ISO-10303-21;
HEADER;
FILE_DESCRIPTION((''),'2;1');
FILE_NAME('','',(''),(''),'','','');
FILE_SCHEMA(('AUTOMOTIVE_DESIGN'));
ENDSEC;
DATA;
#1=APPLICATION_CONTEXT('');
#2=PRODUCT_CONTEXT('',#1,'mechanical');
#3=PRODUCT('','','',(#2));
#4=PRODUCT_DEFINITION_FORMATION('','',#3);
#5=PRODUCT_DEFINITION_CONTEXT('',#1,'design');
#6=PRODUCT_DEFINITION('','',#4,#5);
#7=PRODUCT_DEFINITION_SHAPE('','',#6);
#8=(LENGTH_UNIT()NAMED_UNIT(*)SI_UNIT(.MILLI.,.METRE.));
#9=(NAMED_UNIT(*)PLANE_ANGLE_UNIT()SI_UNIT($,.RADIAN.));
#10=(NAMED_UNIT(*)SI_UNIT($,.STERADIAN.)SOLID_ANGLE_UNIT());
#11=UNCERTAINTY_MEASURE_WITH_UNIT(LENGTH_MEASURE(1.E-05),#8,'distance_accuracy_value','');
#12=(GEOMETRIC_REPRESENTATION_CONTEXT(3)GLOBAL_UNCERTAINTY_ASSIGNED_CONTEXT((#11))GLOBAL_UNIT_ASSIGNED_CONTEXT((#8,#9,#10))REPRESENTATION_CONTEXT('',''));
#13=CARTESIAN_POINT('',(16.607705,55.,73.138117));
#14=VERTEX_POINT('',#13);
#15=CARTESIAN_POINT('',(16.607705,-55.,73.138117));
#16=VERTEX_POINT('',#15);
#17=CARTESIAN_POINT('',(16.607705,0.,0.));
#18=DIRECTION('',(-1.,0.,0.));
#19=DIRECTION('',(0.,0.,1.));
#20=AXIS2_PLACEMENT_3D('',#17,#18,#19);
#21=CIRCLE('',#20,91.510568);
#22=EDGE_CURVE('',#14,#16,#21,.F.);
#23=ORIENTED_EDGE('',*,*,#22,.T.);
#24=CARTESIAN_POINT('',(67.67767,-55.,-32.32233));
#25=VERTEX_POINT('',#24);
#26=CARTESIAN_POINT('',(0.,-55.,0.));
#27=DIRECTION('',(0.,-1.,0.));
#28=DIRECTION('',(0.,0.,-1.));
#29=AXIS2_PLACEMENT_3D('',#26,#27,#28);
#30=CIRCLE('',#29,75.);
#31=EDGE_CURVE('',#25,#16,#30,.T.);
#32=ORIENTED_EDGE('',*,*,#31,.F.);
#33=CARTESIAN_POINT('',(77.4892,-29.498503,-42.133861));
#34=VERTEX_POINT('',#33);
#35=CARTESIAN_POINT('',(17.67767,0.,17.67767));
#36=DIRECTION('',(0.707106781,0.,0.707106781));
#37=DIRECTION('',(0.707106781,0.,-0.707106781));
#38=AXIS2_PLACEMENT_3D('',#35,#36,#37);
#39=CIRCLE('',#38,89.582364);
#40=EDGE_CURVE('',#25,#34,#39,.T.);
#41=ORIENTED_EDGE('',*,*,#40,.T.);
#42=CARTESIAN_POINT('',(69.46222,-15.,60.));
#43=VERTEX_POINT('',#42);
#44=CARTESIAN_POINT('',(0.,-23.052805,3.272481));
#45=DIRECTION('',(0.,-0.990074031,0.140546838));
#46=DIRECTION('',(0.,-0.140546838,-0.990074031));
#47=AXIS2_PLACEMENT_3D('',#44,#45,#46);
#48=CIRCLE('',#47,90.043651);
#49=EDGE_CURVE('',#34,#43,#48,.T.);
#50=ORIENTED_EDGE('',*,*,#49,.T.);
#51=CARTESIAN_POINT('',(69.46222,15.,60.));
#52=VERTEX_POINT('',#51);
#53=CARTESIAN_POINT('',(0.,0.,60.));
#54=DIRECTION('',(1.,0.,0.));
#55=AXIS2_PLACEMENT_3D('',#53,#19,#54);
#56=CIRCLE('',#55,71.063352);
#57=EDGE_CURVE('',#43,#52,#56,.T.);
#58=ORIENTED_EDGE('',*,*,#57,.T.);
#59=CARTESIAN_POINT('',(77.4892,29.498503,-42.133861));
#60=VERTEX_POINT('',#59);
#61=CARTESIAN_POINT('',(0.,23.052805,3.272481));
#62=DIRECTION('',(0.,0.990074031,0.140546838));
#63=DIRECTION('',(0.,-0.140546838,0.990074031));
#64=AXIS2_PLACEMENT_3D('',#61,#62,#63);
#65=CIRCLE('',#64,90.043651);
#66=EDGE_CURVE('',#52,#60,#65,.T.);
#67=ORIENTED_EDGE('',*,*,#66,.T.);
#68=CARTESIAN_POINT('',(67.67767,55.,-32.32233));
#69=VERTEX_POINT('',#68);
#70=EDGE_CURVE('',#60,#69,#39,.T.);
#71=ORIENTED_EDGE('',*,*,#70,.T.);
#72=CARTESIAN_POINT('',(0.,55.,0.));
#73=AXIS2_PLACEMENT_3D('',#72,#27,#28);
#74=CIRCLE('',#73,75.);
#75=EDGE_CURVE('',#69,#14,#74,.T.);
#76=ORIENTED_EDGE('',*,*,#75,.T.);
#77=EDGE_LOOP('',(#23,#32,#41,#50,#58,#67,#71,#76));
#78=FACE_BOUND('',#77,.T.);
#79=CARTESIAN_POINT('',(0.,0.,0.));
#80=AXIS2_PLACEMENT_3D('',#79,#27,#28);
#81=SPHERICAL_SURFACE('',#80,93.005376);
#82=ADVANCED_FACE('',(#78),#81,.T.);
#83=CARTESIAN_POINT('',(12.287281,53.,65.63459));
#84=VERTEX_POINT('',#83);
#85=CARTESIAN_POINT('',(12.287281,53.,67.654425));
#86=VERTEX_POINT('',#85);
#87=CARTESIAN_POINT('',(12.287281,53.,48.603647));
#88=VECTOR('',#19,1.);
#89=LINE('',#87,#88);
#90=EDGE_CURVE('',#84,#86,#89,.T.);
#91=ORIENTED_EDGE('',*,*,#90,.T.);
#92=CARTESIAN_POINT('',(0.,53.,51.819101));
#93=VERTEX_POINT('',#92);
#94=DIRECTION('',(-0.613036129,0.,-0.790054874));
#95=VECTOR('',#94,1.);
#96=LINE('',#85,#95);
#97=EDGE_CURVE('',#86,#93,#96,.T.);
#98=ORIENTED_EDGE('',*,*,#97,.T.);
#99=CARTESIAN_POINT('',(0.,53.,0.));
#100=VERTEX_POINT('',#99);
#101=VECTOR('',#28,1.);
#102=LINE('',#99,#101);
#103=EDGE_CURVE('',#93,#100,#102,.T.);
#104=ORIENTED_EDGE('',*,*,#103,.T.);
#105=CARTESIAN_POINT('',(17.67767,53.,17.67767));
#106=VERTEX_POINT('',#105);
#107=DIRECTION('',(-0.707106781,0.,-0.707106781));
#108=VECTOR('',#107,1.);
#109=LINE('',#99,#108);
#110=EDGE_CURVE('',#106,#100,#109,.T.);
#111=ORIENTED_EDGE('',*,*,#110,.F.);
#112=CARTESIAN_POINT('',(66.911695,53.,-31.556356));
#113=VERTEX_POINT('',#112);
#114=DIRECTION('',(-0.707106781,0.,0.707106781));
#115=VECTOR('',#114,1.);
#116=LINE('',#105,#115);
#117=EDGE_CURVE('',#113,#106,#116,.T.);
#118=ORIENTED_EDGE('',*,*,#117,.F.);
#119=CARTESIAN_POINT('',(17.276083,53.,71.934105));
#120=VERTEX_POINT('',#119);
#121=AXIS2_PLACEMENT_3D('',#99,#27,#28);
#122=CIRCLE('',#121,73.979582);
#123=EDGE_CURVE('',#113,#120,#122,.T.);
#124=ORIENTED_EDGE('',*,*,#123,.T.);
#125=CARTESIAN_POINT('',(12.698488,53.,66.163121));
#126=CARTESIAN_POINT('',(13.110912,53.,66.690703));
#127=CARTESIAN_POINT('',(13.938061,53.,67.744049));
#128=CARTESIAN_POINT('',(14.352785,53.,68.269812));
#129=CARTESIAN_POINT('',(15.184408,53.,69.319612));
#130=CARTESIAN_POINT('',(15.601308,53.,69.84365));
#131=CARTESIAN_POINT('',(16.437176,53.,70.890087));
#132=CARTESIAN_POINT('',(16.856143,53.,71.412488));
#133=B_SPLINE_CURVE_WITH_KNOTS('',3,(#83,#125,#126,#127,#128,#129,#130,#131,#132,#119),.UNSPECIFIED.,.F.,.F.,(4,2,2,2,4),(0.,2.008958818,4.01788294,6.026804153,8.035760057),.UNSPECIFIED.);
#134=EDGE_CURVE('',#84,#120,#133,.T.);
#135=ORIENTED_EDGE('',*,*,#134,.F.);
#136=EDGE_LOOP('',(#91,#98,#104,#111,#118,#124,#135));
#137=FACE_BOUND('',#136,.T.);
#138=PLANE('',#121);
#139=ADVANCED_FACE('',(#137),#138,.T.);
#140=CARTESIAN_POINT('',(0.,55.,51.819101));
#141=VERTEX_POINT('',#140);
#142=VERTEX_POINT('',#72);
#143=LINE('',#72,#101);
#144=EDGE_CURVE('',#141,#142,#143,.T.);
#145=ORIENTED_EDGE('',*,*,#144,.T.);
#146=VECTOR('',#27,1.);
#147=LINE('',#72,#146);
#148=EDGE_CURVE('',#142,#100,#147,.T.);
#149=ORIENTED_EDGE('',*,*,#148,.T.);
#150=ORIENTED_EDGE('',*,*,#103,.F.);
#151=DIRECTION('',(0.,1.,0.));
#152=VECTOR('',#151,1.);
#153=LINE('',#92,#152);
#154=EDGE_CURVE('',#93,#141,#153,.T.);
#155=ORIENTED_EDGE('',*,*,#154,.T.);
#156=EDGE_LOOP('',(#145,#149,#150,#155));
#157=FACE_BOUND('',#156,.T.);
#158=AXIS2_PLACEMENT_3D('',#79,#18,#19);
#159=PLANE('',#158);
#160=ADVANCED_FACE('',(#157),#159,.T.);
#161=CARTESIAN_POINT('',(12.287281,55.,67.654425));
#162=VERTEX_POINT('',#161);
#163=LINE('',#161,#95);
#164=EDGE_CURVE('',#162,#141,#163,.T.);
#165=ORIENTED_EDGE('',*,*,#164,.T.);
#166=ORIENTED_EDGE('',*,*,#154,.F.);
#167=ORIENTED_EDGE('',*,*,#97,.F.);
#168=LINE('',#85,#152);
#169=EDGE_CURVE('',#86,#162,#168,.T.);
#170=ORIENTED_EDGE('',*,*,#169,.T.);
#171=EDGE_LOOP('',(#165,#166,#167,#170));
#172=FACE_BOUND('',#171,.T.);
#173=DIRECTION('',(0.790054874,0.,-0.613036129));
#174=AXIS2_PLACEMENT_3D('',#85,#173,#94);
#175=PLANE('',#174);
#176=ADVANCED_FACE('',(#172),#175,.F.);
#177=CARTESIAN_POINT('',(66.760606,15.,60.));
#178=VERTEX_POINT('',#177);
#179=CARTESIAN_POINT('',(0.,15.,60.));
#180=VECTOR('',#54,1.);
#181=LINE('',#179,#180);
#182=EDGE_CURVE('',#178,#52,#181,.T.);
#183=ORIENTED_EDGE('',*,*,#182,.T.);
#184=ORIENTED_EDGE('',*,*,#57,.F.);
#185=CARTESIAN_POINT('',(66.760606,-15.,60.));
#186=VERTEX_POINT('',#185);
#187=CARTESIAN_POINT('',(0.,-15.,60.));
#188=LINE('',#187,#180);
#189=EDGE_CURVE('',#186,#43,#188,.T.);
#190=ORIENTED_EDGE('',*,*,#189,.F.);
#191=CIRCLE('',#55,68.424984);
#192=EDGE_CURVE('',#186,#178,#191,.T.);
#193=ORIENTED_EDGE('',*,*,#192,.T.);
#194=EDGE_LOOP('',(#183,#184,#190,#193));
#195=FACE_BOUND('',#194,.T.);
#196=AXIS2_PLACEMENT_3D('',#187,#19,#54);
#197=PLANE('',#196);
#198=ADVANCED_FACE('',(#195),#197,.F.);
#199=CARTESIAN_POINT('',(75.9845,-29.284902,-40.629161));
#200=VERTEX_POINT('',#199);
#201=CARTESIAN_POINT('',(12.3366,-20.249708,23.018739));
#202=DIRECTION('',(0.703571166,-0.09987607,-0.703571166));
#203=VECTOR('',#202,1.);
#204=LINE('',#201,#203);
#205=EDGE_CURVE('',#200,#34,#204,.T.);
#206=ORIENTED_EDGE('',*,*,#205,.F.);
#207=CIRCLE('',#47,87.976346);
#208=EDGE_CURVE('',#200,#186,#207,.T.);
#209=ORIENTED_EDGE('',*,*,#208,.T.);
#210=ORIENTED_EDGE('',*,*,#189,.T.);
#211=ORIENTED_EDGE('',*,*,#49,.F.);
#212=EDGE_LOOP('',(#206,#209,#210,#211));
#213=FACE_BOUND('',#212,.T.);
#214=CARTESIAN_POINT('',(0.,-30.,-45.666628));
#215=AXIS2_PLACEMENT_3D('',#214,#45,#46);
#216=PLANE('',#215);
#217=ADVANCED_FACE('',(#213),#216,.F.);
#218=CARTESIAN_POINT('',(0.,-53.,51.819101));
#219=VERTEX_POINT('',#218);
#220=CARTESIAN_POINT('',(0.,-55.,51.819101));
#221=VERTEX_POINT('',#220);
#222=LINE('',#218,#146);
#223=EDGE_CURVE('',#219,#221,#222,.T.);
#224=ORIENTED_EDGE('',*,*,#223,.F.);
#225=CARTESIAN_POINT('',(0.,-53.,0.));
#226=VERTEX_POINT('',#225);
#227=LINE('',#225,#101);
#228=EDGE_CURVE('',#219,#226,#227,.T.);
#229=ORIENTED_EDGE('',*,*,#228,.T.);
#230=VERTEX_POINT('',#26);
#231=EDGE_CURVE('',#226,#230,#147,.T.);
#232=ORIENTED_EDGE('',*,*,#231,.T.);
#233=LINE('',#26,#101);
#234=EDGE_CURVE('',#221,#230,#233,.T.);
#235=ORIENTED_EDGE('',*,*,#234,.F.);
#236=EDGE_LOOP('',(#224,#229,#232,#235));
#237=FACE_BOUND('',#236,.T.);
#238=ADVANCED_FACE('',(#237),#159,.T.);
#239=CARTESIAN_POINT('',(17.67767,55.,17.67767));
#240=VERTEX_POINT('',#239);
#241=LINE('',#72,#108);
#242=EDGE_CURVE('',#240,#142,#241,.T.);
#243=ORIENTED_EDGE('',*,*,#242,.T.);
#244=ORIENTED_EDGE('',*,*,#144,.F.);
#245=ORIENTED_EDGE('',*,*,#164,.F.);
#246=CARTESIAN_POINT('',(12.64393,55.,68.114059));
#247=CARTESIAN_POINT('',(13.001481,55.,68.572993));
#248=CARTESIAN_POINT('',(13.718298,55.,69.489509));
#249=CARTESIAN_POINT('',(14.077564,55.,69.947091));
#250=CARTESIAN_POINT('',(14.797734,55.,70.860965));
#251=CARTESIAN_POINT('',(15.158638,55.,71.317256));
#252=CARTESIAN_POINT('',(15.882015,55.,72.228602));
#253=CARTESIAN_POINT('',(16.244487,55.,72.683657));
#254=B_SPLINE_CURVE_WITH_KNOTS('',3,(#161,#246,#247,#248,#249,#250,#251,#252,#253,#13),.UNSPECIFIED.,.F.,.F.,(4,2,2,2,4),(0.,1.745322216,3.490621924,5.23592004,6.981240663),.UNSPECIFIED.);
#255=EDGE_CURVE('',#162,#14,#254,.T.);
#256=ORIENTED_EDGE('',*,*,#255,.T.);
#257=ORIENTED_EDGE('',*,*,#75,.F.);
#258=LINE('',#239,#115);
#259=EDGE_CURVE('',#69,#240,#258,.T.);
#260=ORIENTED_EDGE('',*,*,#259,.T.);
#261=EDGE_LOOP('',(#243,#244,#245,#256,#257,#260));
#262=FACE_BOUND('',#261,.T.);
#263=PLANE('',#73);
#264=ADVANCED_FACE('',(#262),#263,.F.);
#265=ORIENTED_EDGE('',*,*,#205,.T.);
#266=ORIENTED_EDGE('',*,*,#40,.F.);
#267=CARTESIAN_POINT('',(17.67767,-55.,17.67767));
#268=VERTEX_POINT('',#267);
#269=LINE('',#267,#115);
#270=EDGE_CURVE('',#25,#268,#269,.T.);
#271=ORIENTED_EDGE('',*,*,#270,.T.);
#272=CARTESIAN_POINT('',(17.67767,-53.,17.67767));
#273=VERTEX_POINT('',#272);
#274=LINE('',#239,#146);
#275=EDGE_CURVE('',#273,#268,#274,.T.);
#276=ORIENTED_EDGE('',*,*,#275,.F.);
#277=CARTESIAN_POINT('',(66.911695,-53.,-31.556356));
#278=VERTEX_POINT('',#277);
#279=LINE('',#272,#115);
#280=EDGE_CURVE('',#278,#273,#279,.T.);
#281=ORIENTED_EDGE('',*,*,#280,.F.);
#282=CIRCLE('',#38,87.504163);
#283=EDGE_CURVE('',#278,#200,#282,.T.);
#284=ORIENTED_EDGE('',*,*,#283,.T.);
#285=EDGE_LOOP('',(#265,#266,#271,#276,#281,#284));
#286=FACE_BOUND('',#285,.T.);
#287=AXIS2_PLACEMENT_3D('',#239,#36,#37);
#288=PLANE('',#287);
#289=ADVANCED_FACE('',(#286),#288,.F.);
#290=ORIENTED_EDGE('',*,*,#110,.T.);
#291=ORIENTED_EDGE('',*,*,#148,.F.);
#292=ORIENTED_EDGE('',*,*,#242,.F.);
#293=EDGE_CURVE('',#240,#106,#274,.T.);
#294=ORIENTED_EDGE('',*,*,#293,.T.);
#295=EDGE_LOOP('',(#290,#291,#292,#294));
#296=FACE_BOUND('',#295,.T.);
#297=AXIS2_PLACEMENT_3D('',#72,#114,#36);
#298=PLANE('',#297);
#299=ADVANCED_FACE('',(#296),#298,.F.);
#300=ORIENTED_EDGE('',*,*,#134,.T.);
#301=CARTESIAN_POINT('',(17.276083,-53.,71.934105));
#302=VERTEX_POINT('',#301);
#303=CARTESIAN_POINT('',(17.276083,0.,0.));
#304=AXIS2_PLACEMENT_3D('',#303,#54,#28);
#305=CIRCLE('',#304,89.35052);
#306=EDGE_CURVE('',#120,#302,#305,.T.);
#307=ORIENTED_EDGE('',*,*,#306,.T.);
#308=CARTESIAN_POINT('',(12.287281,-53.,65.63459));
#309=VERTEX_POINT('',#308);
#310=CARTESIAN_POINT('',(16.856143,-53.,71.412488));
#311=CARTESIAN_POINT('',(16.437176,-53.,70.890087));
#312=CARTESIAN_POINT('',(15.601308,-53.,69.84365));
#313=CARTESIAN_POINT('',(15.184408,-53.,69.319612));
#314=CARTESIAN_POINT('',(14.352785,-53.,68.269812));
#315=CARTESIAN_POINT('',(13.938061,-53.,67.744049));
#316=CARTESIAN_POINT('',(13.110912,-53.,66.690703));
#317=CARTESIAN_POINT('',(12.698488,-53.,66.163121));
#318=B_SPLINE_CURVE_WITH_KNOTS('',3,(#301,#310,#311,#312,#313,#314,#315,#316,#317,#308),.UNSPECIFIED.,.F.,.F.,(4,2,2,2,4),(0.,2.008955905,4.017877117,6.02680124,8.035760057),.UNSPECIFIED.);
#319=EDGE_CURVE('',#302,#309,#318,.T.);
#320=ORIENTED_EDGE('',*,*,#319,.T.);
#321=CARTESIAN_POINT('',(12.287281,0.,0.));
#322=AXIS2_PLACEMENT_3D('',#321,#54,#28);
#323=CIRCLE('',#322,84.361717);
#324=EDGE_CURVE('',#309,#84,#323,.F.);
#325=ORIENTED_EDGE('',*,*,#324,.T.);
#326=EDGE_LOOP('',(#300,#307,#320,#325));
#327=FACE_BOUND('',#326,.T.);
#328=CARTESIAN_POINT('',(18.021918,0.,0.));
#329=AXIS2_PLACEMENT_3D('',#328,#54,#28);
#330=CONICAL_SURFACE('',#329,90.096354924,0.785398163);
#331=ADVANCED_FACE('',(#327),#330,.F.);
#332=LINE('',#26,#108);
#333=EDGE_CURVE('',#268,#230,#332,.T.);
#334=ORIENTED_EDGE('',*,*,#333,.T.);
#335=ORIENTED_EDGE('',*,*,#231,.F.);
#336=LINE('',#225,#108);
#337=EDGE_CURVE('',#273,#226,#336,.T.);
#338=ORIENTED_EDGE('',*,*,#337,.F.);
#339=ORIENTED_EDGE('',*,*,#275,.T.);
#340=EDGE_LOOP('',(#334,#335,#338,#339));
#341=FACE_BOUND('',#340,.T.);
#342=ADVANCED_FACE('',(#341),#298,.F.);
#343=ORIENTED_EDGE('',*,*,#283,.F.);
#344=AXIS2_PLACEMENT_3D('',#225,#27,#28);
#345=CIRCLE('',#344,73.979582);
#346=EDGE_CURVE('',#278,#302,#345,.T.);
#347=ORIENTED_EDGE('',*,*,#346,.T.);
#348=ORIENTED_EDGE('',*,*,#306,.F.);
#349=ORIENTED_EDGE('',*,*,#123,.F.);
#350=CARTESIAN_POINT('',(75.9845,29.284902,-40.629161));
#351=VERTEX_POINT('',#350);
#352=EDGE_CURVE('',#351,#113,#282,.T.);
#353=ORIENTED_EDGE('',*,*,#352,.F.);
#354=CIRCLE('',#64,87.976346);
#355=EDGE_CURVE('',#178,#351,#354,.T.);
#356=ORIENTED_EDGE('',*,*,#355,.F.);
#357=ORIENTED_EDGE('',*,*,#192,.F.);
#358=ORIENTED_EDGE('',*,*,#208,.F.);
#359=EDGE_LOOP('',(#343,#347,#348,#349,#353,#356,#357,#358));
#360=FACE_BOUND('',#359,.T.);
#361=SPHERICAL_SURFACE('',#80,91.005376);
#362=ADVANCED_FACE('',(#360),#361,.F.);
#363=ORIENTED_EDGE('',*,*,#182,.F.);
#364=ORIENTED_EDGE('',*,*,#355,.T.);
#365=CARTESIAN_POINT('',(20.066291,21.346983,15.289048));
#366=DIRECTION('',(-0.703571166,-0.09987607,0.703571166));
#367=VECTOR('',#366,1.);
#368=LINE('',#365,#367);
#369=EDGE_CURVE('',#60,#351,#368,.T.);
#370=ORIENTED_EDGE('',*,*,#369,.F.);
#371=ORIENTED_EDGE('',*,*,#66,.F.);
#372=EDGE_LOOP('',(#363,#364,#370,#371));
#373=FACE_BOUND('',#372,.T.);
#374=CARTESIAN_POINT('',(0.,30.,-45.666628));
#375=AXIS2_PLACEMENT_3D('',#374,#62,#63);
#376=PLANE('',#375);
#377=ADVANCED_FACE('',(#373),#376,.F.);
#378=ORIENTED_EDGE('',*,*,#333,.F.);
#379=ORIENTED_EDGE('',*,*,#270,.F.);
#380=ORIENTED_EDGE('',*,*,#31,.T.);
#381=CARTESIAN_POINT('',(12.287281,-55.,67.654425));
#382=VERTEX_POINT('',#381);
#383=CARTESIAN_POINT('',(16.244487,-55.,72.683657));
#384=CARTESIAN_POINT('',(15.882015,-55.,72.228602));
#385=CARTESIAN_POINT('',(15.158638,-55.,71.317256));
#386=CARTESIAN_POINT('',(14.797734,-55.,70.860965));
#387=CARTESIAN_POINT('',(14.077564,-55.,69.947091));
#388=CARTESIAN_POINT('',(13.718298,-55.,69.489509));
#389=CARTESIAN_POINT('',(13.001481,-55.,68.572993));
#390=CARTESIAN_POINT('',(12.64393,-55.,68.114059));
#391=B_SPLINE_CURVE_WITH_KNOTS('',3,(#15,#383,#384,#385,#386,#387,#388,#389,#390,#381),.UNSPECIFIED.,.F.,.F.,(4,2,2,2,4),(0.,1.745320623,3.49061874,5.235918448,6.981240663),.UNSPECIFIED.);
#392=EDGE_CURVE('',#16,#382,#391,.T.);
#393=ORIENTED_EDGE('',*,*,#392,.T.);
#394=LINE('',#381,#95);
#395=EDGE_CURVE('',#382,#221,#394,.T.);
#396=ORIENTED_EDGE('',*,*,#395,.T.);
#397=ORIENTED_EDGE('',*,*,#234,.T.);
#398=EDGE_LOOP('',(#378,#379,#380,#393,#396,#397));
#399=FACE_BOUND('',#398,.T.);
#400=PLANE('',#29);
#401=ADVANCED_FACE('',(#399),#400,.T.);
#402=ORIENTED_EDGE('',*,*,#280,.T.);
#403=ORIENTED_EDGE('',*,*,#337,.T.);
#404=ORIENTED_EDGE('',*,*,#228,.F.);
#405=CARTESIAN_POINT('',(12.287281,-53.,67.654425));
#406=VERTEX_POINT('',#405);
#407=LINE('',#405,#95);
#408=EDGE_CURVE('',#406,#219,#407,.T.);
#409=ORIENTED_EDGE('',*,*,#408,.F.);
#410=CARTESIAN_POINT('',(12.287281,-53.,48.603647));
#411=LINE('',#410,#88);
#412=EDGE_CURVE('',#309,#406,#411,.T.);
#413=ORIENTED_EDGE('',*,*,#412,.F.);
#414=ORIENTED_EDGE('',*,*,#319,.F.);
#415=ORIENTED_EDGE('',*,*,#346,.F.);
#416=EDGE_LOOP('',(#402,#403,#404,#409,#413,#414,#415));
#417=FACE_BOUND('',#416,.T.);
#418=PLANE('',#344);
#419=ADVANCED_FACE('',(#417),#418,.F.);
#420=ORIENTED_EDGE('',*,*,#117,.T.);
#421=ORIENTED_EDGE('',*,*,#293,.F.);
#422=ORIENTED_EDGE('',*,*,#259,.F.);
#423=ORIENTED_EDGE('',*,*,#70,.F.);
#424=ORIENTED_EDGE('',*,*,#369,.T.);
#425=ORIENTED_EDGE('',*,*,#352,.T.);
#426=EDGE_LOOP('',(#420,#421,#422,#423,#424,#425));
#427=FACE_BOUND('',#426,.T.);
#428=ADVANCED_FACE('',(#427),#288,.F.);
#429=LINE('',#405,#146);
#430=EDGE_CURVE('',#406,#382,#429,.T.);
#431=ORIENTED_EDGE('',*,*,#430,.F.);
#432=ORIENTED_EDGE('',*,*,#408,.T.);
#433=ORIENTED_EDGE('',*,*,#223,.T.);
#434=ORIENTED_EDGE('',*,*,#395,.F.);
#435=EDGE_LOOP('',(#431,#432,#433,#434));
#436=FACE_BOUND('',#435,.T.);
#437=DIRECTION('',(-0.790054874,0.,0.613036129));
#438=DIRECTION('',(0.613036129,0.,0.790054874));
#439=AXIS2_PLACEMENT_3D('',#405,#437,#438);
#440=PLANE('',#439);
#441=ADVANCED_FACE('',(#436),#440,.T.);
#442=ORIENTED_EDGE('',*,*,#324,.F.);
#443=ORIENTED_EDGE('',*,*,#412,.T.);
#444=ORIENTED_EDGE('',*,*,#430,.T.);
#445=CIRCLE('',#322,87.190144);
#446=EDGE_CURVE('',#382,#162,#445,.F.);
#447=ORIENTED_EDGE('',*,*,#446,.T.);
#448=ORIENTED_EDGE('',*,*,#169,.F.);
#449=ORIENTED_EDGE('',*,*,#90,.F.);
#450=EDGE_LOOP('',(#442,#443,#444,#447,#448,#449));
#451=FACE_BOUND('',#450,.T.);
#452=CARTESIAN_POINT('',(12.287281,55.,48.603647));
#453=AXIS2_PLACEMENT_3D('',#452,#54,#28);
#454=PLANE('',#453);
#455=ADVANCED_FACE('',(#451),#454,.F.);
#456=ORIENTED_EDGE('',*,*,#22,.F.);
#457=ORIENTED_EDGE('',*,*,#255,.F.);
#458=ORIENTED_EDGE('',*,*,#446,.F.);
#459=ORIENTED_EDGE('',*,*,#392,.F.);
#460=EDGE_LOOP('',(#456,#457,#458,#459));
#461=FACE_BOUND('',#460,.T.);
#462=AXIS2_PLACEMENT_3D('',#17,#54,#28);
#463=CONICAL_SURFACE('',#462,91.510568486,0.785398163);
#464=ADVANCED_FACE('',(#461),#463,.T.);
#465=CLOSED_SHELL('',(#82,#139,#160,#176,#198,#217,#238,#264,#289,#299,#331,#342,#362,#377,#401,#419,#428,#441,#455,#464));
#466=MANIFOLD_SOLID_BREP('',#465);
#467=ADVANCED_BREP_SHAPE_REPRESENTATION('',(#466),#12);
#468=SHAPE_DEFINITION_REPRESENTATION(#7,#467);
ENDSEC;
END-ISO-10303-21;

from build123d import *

# Parameters (mm, degrees)
OBR_T1_ANGLE                = 180
WYTNIJ_WYCI_GNI_CIE1_DEPTH  = 172.464281995
WYTNIJ_WYCI_GNI_CIE2_DEPTH  = 147.710676959
SFAZOWANIE1_SIZE            = 5
SKORUPA1_T                  = -2
DODANIE_WYCI_GNI_CIE1_DEPTH = 2


with BuildPart() as part:
    # Szkic1 → Obrót1 (revolve)
    with BuildSketch(Plane(origin=(0, 0, 0), x_dir=(0, 0, -1), z_dir=(1, 0, 0))):
        with BuildLine():
            Line((0, -55), (0, 55))
            Line((0, 55), (-75, 55))
            ThreePointArc((-75, 55), (-93.005376189, 0), (-75, -55))
            Line((-75, -55), (0, -55))
        make_face()
    revolve(axis=Axis((0, -55, 0), (0, 1, 0)), revolution_arc=OBR_T1_ANGLE)

    # Szkic2 → Wytnij-wyciągnięcie1 (cut, through all)
    with BuildSketch(Plane.XZ.offset(55)):
        Polygon((0, 0), (0, 40), (12.287280664, 48.603646545), (12.287280664, 99.487677337), (-26.065901524, 99.487677337), (-26.065901524, -104.75854766), (87.353699516, -104.75854766), (87.353699516, -51.998360457), (17.67766953, 17.67766953), align=None)
    extrude(amount=-WYTNIJ_WYCI_GNI_CIE1_DEPTH, mode=Mode.SUBTRACT)

    # Szkic3 → Wytnij-wyciągnięcie2 (cut, through all)
    with BuildSketch(Plane(origin=(100, 0, 0), x_dir=(0, 0, -1), z_dir=(1, 0, 0))):
        Polygon((-60, -15), (-60, 15), (45.666627767, 30), (45.666627767, -30), align=None)
    extrude(amount=-WYTNIJ_WYCI_GNI_CIE2_DEPTH, mode=Mode.SUBTRACT)

    # Sfazowanie1
    # the kernel refuses this chamfer: 5, 4.450979534 mm, written as the material it takes off along each edge
    with BuildSketch(Plane(origin=(12.287280664, 0, 0), x_dir=(0, 0.7023997796774998, 0.7117826560889214), z_dir=(0, 0.7117826560889214, -0.7023997796774998))) as sfazowanie1_piece_1:
        with BuildLine():
            Line((92.190144451 - SFAZOWANIE1_SIZE, 0), (91.510568486, 4.320424035))
            ThreePointArc((91.510568486, 4.320424035), (91.866596239, 2.222319448), (92.190144451, 0))
            Line((92.190144451, 0), (92.190144451 - SFAZOWANIE1_SIZE, 0))
        make_face()
    revolve(axis=Axis((12.287280664, 0, 0), (1, 0, 0)), revolution_arc=89.239714317, mode=Mode.SUBTRACT)

    # Skorupa1
    skorupa1_openings = [part.faces().sort_by_distance(p)[0] for p in [
        (0, 37.799975499, 20.551470825),
        (44.318791783, 39.564539913, -8.963452724),
        (12.287280664, 0, 66.554150501),
        (8.951756718, 38.623299359, 8.951756718),
        (6.176749303, 36.112578818, 44.325006424),
        (8.951756718, -38.623299359, 8.951756718),
        (44.318791783, -39.564539913, -8.963452724),
        (6.176749303, -36.112578818, 44.325006424),
        (0, -37.799975499, 20.551470825),
        (41.411625019, 0, 60),
        (50.400096072, -20.67683416, 20.009871862),
        (50.400096072, 20.67683416, 20.009871862),
    ]]
    offset(amount=SKORUPA1_T, openings=skorupa1_openings)

    # Szkic4 → Dodanie-wyciągnięcie1 (add)
    with BuildSketch(Plane.XZ.offset(55)):
        Polygon((0, 40), (0, 51.81910108), (12.287280664, 67.654425497), (12.287280664, 48.603646545), align=None)
    dodanie_wyci_gni_cie1 = extrude(amount=-DODANIE_WYCI_GNI_CIE1_DEPTH)

    # Lustro1: Dodanie-wyciągnięcie1 across plane
    add(dodanie_wyci_gni_cie1.mirror(Plane.ZX))


solid = part.part
